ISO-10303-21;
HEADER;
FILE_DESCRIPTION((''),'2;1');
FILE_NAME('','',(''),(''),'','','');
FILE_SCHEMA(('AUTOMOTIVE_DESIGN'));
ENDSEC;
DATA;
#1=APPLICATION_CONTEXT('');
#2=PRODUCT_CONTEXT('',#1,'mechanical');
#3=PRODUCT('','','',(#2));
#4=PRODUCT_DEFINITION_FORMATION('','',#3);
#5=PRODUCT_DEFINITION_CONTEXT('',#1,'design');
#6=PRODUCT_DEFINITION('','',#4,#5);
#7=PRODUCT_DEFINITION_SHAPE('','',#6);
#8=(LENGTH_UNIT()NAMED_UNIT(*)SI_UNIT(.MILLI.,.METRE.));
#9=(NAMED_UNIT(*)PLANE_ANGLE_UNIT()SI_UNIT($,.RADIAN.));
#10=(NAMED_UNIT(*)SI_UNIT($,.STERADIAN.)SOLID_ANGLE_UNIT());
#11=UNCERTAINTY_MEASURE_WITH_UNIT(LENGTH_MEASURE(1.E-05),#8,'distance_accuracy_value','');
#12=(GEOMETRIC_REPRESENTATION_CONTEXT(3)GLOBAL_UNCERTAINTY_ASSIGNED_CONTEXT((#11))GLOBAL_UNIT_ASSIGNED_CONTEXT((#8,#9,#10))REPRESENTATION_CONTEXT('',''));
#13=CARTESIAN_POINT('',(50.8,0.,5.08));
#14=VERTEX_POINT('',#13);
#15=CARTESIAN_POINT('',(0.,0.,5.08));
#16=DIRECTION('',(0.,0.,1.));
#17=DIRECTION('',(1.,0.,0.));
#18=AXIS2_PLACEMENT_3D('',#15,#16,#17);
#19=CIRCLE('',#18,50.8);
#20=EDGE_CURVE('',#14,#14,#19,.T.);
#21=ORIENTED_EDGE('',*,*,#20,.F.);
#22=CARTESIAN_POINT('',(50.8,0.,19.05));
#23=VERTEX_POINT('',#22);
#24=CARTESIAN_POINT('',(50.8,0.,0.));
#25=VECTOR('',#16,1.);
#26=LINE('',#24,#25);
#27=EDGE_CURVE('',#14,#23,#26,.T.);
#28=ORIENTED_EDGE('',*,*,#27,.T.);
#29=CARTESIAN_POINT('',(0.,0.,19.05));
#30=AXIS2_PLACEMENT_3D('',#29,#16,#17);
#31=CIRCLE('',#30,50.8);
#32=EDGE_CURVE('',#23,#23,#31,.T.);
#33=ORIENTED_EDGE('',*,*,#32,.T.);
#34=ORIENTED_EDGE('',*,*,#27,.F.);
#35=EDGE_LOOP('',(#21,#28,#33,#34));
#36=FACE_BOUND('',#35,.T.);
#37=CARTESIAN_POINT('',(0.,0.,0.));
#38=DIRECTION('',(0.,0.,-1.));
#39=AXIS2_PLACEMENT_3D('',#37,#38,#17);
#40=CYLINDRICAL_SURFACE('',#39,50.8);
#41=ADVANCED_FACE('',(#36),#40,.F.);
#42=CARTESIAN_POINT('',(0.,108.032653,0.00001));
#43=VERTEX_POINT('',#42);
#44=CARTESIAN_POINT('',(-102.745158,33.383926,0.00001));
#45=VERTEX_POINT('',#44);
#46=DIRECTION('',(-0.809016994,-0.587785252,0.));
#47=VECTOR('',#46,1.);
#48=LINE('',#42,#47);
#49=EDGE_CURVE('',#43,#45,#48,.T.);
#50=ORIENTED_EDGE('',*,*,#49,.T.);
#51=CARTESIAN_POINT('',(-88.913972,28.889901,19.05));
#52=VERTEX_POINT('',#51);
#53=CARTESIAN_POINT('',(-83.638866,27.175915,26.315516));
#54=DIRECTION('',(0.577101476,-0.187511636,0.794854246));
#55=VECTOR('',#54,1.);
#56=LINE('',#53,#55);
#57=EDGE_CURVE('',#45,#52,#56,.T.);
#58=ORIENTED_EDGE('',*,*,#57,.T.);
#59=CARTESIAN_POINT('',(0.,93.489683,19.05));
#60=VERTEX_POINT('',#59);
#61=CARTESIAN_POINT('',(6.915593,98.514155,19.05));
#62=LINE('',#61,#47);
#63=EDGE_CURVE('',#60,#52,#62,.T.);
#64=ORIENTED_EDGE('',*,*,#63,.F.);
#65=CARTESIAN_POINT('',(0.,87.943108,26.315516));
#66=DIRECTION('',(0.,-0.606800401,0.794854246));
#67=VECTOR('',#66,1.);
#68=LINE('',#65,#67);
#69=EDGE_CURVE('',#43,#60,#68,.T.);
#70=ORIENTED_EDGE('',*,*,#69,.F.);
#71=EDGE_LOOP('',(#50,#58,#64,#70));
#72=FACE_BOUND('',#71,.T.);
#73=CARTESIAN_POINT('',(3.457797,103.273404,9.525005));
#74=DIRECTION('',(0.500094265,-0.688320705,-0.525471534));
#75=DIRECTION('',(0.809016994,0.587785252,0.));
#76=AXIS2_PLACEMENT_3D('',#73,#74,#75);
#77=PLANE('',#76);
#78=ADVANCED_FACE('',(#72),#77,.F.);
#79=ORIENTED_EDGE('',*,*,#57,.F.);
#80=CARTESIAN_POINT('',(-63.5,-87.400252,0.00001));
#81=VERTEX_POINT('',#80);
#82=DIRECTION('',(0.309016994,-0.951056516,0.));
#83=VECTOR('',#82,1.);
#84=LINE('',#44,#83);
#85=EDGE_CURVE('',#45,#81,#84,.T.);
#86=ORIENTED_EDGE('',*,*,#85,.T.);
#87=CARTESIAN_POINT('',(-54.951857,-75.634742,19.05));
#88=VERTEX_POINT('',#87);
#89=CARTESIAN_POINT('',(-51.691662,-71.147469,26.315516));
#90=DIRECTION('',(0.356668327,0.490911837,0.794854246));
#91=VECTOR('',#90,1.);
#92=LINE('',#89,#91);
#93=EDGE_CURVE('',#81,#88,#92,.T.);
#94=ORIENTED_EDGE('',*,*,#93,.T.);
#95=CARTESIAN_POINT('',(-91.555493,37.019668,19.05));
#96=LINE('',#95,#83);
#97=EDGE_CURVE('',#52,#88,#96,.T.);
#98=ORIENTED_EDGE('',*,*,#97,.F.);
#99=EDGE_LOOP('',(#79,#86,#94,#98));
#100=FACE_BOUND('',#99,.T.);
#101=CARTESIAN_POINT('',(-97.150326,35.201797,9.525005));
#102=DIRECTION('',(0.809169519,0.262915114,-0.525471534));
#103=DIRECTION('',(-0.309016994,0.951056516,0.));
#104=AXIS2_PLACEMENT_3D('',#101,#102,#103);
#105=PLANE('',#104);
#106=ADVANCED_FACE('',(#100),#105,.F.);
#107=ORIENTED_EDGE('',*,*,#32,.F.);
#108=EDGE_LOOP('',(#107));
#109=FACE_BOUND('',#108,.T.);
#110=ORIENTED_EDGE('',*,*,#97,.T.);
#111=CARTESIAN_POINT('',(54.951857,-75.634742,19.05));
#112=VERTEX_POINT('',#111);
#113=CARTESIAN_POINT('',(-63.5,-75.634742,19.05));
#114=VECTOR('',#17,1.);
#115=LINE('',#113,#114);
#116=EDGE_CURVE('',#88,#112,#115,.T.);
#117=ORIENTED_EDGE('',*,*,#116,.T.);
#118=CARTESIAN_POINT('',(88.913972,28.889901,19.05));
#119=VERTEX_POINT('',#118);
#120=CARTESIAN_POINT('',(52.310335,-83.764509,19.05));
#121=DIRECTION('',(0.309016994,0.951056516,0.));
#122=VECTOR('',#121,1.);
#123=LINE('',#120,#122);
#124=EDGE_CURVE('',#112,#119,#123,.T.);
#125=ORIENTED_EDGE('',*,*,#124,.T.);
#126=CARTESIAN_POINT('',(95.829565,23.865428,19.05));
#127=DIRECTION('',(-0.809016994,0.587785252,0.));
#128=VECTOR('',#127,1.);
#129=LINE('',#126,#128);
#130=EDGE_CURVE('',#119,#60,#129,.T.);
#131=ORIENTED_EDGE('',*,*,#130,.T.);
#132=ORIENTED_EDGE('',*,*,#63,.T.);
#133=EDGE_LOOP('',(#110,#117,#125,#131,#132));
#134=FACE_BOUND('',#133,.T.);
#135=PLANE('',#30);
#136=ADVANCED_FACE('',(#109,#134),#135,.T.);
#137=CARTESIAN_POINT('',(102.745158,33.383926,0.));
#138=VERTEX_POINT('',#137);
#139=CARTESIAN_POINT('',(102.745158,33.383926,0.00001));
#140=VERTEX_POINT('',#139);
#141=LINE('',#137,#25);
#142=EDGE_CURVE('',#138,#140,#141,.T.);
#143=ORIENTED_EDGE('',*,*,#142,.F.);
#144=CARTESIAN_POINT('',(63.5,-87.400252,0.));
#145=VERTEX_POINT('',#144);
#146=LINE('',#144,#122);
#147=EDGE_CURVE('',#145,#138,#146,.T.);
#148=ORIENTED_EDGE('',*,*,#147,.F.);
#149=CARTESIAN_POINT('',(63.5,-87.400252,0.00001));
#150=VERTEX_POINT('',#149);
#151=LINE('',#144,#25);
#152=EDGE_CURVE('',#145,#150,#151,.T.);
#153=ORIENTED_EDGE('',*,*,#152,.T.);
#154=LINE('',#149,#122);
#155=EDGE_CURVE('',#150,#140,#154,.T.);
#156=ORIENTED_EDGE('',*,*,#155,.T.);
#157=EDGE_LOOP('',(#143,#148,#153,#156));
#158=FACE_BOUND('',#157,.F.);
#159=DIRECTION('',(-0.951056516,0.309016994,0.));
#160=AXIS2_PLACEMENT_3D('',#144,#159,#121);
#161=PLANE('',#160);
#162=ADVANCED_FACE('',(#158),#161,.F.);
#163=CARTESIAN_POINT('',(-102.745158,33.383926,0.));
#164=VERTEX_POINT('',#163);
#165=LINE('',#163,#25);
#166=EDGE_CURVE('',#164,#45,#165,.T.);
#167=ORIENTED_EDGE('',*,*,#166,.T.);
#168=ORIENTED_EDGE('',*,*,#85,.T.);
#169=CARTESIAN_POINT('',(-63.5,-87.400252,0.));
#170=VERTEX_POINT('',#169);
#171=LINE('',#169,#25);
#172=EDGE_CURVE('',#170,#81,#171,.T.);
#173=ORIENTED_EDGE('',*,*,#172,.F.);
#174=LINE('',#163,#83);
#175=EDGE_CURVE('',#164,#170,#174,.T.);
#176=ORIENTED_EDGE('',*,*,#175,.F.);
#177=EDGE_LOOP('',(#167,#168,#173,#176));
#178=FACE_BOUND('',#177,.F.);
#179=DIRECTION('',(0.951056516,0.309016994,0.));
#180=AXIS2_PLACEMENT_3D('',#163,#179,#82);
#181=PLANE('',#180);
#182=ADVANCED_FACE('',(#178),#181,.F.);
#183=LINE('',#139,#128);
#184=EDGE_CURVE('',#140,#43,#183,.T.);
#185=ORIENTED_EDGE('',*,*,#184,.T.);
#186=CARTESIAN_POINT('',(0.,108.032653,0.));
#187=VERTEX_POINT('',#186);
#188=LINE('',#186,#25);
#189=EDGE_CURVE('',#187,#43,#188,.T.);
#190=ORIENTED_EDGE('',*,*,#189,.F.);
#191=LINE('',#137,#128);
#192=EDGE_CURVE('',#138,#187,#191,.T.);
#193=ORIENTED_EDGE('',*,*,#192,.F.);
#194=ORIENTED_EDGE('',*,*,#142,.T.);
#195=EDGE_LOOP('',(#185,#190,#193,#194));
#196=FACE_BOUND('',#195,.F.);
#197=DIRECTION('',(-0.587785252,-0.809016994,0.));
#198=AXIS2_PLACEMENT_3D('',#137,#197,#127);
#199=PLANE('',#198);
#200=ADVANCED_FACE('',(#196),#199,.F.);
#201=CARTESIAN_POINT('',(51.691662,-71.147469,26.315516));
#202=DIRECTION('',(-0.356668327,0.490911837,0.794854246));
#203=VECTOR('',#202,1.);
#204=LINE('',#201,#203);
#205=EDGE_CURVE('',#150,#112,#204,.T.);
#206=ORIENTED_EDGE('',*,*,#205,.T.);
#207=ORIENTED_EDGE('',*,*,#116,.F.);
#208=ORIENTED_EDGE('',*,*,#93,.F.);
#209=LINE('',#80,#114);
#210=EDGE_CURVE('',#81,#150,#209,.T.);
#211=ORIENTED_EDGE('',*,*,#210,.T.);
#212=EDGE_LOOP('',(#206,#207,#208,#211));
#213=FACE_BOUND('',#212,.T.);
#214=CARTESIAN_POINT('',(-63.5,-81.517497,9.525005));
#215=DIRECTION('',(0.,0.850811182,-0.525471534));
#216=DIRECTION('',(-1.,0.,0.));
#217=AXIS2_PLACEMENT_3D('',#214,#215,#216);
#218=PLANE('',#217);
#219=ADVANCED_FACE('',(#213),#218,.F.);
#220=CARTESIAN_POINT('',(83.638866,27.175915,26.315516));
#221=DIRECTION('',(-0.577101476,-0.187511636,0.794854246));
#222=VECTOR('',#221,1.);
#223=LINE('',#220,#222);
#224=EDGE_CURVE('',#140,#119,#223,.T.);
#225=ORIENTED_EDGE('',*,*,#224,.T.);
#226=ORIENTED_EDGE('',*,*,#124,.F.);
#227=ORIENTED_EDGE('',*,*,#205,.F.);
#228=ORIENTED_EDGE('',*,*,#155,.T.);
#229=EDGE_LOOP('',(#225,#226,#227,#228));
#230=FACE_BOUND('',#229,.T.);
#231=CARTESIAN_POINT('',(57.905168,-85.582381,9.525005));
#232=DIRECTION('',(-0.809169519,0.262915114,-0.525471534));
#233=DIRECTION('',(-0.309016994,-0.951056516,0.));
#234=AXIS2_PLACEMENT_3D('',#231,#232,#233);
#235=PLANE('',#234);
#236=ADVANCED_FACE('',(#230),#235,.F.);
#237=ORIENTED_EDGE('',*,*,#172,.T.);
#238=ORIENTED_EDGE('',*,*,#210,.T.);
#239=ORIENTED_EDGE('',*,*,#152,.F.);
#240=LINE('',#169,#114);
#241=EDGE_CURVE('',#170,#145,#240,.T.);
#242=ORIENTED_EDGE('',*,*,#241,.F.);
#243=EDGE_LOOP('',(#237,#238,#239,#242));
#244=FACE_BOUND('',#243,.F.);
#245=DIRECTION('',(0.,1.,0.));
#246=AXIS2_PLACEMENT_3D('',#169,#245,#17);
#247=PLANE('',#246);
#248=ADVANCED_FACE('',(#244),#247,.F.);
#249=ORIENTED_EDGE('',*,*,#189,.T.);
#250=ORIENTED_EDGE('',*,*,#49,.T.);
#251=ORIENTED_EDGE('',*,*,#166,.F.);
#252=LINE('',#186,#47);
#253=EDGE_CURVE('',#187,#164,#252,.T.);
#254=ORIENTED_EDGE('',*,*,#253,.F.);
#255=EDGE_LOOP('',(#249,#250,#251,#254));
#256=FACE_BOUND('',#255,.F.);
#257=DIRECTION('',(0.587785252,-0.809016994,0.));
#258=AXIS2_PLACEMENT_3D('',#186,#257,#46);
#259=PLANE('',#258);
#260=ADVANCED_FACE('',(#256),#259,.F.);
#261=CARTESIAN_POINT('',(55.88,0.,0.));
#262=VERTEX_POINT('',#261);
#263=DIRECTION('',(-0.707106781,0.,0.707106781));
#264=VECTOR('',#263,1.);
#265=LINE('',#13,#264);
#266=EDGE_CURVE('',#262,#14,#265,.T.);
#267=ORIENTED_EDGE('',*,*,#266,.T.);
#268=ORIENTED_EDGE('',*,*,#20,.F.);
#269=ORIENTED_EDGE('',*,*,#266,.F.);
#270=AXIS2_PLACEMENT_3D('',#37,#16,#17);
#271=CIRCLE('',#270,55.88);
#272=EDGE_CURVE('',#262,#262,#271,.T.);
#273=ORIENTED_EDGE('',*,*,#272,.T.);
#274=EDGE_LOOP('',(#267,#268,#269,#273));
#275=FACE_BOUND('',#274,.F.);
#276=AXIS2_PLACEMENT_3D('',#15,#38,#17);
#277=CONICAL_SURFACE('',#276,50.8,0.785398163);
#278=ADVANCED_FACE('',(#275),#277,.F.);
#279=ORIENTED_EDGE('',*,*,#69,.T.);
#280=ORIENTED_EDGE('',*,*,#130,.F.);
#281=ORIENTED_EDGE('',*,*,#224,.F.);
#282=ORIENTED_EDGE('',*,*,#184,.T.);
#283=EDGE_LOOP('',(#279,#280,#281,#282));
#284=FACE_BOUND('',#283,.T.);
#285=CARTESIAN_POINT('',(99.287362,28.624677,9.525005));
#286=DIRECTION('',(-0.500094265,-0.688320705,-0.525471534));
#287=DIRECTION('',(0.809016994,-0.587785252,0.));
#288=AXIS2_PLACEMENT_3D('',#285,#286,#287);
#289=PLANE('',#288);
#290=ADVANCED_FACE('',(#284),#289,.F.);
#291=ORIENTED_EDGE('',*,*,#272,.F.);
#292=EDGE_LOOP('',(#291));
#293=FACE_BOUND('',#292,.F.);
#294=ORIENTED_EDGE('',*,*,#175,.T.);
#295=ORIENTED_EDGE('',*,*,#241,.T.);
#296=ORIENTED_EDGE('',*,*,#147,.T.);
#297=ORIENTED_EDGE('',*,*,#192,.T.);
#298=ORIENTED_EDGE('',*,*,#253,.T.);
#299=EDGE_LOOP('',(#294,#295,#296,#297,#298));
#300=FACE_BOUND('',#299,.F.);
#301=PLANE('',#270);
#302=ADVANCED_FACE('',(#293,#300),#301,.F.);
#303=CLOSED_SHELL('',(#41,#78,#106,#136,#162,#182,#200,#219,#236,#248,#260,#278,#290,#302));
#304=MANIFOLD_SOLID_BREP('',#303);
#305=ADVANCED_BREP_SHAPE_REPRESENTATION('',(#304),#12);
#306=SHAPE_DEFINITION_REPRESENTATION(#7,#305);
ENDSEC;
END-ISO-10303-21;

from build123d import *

# Parameters (mm, degrees)
F0_R     = 50.8
F1_DEPTH = 19.05
F2_SIZE2 = 11.76551
F2_SIZE  = 19.04999
F3_SIZE  = 5.08


# Not quite as in the source:
# - a fillet or chamfer is up to 0.001 mm smaller than in the source, because OpenCascade refuses the exact size


with BuildPart() as f1:
    # F0 (on Top) → F1 (new body)
    with BuildSketch(Plane.XY):
        Polygon((0, 108.0326526607), (-102.7451582856, 33.3839256196), (-63.5, -87.4002519499), (63.5, -87.4002519499), (102.7451582856, 33.3839256196), align=None)
        Circle(F0_R, mode=Mode.SUBTRACT)
    extrude(amount=F1_DEPTH)

    # F2 (size 19.05 and 11.7655197988 in the source; OpenCascade refuses exactly that, so slightly less here)
    f2_edges = [f1.edges().sort_by_distance(p)[0] for p in [
        (0, -87.400252, 19.05),
        (83.122579, -27.008163, 19.05),
        (51.372579, 70.708289, 19.05),
        (-51.372579, 70.708289, 19.05),
        (-83.122579, -27.008163, 19.05),
    ]]
    chamfer(f2_edges, length=F2_SIZE, length2=F2_SIZE2)

    # F3
    f3_edges = [f1.edges().sort_by_distance(p)[0] for p in [
        (-50.8, 0, 0),
    ]]
    chamfer(f3_edges, length=F3_SIZE)


solid = f1.part
